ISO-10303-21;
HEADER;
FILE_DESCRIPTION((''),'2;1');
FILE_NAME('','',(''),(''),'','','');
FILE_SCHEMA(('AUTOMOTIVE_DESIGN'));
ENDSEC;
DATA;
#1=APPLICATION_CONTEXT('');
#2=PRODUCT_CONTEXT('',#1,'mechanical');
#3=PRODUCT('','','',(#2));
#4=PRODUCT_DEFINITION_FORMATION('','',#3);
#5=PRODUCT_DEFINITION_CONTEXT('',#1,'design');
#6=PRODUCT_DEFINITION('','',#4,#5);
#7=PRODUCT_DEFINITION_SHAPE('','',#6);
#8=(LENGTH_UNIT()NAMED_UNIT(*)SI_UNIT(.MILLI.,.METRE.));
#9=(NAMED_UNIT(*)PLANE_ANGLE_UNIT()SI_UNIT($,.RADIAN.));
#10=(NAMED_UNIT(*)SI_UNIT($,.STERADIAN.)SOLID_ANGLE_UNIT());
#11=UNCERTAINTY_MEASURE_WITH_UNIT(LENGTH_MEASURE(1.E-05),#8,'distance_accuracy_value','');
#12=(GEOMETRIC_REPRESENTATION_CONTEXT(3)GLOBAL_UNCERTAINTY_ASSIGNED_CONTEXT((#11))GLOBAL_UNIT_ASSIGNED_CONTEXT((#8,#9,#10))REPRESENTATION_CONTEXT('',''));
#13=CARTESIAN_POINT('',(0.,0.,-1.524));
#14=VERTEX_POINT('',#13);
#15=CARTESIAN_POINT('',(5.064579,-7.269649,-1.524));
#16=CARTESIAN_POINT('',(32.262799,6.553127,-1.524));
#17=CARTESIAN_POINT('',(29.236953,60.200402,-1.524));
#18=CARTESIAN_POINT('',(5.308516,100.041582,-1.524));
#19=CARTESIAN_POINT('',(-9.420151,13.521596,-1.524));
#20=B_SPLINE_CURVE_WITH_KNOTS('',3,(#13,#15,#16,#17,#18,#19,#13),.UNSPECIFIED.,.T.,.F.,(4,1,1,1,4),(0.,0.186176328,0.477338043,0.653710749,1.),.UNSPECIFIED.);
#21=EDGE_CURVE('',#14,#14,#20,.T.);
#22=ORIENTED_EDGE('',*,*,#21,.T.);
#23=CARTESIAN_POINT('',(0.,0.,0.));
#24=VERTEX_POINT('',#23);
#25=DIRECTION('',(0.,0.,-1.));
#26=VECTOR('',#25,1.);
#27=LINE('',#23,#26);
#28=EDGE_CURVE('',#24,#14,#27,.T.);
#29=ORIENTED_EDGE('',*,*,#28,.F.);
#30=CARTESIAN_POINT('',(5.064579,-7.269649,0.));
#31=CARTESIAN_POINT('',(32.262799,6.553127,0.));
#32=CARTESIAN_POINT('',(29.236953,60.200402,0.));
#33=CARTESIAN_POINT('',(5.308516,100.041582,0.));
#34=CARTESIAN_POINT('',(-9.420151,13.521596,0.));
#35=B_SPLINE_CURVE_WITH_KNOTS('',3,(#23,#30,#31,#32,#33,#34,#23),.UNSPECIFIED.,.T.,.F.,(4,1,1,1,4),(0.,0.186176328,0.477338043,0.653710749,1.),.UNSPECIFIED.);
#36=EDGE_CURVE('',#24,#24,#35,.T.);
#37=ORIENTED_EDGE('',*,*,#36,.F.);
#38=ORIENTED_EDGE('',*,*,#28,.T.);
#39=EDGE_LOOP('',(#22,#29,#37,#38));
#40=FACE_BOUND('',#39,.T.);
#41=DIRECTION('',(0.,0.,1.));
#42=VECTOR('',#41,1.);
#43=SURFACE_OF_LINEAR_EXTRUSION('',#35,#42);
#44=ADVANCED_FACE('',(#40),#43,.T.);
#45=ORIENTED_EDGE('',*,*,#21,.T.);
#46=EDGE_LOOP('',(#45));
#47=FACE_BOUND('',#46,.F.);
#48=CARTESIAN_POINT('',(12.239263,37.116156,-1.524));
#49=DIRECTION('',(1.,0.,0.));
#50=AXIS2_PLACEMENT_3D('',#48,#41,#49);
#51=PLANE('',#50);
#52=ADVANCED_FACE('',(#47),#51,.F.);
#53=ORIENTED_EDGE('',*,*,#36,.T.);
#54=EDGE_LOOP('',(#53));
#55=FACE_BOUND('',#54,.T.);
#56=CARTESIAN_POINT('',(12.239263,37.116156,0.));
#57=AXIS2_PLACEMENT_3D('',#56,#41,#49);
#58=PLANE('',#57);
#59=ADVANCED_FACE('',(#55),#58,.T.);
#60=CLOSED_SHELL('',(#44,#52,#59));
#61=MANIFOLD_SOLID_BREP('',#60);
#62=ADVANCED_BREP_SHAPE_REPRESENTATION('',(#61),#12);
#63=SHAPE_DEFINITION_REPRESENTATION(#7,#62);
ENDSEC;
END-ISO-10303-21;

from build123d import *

# Parameters (mm, degrees)
F1_DEPTH = 1.524


with BuildPart() as f1:
    # F0 (on Top) → F1 (new body)
    with BuildSketch(Plane.XY):
        with BuildLine():
            add(Edge.make_bspline(
                [(0, 0), (5.064578753, -7.2696486377), (32.262799099, 6.5531268908), (29.2369527472, 60.2004015822), (5.3085155602, 100.0415820975), (-9.4201512984, 13.5215964432), (0, 0)],
                knots=[0, 0, 0, 0, 0.1861763284, 0.4773380425, 0.6537107492, 1, 1, 1, 1], degree=3))
        make_face()
    extrude(amount=-F1_DEPTH)


solid = f1.part
